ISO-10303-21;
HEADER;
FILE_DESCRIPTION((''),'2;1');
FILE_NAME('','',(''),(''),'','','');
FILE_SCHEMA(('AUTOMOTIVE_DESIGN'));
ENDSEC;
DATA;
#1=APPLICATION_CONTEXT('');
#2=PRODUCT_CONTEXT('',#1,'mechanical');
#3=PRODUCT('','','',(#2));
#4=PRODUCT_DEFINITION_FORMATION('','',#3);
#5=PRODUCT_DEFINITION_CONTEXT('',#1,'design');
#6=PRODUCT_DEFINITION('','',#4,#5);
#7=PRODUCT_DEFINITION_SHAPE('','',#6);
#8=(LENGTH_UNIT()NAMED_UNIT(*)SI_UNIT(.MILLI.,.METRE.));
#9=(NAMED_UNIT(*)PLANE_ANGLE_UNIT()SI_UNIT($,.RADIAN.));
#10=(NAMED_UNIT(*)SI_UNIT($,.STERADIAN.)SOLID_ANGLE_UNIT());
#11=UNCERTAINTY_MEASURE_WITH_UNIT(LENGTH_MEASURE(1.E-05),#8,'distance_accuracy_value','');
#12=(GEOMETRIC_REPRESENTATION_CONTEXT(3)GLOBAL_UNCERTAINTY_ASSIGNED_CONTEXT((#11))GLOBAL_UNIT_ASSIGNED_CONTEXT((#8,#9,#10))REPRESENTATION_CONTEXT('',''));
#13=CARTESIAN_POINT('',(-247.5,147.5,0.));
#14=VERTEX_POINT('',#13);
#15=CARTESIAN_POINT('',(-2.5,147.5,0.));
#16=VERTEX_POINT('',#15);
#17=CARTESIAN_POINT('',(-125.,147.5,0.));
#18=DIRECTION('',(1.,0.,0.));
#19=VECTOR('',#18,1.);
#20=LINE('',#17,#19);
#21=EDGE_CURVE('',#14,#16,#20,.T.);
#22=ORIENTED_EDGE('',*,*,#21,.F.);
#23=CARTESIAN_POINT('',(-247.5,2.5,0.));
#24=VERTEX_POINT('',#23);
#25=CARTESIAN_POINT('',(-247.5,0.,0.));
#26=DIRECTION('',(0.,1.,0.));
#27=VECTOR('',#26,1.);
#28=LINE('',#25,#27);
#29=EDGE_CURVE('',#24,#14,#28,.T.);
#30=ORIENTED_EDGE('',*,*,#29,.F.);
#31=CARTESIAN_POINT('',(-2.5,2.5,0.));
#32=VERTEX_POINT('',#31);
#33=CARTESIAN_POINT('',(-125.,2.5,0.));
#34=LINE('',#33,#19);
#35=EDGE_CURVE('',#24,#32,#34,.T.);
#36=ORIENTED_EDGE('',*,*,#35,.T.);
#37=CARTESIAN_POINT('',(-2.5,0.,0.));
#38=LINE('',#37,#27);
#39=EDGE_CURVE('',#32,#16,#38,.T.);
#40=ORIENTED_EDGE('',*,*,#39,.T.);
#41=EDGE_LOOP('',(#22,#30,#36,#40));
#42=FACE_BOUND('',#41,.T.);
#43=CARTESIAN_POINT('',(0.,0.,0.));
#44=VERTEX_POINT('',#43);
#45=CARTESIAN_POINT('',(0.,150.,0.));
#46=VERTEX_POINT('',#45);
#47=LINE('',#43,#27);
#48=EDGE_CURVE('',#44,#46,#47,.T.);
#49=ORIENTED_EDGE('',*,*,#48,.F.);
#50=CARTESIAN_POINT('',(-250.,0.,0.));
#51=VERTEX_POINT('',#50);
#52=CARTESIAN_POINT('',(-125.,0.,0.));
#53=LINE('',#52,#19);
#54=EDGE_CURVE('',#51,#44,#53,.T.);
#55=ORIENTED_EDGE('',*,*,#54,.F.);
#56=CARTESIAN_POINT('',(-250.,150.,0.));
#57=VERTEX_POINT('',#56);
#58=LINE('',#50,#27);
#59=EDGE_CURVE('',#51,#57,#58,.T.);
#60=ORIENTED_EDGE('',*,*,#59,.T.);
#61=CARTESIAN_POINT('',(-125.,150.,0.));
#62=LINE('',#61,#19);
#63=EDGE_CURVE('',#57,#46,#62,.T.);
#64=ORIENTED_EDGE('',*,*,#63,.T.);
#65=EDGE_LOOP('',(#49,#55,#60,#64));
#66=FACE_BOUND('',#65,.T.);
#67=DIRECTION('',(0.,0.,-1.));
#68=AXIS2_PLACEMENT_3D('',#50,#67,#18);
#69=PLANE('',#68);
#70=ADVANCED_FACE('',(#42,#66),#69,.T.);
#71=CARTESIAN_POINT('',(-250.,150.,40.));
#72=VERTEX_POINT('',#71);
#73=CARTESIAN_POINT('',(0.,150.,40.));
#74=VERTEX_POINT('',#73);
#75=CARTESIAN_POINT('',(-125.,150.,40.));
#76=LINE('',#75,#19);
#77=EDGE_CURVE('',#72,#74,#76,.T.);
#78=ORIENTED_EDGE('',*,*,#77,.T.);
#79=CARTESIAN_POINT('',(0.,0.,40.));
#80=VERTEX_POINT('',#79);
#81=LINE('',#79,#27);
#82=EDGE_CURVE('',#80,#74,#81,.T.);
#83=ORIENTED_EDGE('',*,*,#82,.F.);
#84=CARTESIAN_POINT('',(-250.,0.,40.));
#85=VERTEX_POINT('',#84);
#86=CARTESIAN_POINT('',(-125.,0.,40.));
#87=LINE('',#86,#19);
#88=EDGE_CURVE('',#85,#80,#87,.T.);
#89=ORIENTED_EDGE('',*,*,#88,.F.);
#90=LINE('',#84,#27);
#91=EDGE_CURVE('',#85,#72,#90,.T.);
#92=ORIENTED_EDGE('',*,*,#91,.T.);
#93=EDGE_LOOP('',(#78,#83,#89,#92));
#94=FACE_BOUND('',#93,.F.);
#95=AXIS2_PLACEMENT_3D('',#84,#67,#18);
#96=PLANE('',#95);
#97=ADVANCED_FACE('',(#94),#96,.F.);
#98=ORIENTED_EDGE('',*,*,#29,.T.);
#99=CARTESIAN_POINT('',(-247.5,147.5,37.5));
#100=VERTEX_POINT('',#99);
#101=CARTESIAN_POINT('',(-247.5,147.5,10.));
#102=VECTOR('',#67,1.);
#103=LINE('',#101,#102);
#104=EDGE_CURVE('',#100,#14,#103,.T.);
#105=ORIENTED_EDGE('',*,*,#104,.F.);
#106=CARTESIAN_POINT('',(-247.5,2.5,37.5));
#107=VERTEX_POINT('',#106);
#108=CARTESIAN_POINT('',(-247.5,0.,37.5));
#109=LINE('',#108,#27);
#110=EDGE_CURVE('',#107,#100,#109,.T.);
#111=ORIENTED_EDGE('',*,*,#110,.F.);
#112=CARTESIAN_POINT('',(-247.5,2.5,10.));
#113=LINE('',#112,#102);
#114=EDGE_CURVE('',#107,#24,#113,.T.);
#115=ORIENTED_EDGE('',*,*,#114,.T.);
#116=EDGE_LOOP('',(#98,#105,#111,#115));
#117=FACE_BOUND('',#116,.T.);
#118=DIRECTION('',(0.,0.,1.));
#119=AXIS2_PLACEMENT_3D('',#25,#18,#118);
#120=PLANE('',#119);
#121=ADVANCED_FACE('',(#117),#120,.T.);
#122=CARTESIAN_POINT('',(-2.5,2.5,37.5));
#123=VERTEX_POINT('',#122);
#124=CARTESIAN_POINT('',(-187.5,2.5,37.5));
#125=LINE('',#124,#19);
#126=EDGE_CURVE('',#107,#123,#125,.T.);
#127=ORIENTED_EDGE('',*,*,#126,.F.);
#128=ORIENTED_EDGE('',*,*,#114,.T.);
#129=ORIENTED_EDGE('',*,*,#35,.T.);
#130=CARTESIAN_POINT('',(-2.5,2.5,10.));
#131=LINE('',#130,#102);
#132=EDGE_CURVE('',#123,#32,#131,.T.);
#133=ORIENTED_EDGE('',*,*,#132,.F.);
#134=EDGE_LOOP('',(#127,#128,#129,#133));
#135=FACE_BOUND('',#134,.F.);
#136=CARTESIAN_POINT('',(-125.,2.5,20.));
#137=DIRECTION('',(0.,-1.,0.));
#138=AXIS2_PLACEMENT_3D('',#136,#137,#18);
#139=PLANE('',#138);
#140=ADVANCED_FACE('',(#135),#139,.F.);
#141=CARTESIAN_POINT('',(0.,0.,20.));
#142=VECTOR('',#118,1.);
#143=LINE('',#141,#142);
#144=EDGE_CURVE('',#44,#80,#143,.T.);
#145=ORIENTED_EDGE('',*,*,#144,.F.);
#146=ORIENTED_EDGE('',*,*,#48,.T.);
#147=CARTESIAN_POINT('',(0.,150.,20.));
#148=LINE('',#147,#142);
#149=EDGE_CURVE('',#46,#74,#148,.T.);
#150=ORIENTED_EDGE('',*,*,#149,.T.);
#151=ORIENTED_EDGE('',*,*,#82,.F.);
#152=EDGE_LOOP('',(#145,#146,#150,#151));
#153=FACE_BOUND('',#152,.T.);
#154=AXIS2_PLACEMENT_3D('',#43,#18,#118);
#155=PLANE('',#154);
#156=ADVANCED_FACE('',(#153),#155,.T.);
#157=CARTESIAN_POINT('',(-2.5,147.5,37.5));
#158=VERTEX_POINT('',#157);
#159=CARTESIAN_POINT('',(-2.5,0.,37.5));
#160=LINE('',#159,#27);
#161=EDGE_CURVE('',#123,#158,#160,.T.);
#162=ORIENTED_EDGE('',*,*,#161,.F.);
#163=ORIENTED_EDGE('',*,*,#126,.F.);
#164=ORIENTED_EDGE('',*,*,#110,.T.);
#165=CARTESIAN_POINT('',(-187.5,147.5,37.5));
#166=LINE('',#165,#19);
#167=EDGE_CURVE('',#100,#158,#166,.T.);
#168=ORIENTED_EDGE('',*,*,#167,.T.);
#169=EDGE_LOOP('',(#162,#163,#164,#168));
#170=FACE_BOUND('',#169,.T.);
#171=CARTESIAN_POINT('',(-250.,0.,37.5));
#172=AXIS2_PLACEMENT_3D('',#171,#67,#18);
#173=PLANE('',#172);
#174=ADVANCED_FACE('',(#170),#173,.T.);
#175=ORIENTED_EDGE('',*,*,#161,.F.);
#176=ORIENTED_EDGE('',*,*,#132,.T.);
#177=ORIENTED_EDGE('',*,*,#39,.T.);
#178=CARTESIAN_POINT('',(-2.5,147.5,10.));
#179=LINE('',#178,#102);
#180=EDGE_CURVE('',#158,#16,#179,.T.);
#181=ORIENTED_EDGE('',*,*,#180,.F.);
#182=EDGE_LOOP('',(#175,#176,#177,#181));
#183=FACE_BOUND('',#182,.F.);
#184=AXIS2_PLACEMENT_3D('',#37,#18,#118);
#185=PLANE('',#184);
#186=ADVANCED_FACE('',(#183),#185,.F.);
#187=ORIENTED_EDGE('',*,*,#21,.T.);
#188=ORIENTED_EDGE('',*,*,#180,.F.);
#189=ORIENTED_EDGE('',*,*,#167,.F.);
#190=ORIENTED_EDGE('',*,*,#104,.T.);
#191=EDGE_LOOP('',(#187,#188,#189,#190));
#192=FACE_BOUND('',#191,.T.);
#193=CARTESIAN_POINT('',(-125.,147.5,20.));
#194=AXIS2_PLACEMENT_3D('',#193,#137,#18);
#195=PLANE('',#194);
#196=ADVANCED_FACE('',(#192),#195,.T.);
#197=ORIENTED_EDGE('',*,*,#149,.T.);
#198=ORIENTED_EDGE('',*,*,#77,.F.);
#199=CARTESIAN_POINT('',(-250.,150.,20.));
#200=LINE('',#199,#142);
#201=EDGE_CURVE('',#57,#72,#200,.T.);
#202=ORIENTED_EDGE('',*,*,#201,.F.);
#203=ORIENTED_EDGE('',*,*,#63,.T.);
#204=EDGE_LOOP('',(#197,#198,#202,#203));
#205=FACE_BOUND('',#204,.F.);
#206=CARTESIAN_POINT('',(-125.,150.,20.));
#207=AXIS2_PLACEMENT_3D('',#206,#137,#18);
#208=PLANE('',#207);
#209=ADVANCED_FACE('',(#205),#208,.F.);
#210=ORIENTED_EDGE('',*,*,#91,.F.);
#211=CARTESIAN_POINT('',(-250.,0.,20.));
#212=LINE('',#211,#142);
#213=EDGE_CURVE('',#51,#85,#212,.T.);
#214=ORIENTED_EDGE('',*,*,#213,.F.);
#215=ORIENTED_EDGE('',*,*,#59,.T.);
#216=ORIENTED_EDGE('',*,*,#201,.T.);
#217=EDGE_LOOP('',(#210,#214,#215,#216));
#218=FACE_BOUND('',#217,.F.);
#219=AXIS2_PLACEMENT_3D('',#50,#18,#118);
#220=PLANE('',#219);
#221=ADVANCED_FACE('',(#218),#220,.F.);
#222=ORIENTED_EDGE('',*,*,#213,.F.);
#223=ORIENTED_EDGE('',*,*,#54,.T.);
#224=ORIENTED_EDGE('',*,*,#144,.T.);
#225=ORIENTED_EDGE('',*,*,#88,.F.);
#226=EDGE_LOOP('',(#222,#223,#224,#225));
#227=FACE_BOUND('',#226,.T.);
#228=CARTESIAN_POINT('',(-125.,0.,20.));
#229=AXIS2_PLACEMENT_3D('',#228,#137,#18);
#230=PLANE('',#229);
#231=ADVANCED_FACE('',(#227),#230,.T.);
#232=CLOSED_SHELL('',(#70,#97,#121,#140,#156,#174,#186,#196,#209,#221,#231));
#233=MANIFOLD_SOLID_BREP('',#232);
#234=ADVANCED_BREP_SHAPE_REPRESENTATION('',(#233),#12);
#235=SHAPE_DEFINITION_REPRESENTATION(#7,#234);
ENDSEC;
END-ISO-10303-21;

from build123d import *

# Parameters (mm, degrees)
F0_W     = 250
F0_H     = 40
F1_DEPTH = 150
F2_T     = -2.5


# Not quite as in the source:
# - the program builds the solid bodies; features that only make, move or delete a surface that nothing else refers to are left out


with BuildPart() as f1:
    # F0 (on Front) → F1 (new body)
    with BuildSketch(Plane.XZ):
        with Locations((-125, 20)):
            Rectangle(F0_W, F0_H)
    extrude(amount=-F1_DEPTH)

    # F2
    f2_openings = [f1.faces().sort_by_distance(p)[0] for p in [
        (-125, 75, 0),
    ]]
    offset(amount=F2_T, openings=f2_openings)


solid = f1.part
